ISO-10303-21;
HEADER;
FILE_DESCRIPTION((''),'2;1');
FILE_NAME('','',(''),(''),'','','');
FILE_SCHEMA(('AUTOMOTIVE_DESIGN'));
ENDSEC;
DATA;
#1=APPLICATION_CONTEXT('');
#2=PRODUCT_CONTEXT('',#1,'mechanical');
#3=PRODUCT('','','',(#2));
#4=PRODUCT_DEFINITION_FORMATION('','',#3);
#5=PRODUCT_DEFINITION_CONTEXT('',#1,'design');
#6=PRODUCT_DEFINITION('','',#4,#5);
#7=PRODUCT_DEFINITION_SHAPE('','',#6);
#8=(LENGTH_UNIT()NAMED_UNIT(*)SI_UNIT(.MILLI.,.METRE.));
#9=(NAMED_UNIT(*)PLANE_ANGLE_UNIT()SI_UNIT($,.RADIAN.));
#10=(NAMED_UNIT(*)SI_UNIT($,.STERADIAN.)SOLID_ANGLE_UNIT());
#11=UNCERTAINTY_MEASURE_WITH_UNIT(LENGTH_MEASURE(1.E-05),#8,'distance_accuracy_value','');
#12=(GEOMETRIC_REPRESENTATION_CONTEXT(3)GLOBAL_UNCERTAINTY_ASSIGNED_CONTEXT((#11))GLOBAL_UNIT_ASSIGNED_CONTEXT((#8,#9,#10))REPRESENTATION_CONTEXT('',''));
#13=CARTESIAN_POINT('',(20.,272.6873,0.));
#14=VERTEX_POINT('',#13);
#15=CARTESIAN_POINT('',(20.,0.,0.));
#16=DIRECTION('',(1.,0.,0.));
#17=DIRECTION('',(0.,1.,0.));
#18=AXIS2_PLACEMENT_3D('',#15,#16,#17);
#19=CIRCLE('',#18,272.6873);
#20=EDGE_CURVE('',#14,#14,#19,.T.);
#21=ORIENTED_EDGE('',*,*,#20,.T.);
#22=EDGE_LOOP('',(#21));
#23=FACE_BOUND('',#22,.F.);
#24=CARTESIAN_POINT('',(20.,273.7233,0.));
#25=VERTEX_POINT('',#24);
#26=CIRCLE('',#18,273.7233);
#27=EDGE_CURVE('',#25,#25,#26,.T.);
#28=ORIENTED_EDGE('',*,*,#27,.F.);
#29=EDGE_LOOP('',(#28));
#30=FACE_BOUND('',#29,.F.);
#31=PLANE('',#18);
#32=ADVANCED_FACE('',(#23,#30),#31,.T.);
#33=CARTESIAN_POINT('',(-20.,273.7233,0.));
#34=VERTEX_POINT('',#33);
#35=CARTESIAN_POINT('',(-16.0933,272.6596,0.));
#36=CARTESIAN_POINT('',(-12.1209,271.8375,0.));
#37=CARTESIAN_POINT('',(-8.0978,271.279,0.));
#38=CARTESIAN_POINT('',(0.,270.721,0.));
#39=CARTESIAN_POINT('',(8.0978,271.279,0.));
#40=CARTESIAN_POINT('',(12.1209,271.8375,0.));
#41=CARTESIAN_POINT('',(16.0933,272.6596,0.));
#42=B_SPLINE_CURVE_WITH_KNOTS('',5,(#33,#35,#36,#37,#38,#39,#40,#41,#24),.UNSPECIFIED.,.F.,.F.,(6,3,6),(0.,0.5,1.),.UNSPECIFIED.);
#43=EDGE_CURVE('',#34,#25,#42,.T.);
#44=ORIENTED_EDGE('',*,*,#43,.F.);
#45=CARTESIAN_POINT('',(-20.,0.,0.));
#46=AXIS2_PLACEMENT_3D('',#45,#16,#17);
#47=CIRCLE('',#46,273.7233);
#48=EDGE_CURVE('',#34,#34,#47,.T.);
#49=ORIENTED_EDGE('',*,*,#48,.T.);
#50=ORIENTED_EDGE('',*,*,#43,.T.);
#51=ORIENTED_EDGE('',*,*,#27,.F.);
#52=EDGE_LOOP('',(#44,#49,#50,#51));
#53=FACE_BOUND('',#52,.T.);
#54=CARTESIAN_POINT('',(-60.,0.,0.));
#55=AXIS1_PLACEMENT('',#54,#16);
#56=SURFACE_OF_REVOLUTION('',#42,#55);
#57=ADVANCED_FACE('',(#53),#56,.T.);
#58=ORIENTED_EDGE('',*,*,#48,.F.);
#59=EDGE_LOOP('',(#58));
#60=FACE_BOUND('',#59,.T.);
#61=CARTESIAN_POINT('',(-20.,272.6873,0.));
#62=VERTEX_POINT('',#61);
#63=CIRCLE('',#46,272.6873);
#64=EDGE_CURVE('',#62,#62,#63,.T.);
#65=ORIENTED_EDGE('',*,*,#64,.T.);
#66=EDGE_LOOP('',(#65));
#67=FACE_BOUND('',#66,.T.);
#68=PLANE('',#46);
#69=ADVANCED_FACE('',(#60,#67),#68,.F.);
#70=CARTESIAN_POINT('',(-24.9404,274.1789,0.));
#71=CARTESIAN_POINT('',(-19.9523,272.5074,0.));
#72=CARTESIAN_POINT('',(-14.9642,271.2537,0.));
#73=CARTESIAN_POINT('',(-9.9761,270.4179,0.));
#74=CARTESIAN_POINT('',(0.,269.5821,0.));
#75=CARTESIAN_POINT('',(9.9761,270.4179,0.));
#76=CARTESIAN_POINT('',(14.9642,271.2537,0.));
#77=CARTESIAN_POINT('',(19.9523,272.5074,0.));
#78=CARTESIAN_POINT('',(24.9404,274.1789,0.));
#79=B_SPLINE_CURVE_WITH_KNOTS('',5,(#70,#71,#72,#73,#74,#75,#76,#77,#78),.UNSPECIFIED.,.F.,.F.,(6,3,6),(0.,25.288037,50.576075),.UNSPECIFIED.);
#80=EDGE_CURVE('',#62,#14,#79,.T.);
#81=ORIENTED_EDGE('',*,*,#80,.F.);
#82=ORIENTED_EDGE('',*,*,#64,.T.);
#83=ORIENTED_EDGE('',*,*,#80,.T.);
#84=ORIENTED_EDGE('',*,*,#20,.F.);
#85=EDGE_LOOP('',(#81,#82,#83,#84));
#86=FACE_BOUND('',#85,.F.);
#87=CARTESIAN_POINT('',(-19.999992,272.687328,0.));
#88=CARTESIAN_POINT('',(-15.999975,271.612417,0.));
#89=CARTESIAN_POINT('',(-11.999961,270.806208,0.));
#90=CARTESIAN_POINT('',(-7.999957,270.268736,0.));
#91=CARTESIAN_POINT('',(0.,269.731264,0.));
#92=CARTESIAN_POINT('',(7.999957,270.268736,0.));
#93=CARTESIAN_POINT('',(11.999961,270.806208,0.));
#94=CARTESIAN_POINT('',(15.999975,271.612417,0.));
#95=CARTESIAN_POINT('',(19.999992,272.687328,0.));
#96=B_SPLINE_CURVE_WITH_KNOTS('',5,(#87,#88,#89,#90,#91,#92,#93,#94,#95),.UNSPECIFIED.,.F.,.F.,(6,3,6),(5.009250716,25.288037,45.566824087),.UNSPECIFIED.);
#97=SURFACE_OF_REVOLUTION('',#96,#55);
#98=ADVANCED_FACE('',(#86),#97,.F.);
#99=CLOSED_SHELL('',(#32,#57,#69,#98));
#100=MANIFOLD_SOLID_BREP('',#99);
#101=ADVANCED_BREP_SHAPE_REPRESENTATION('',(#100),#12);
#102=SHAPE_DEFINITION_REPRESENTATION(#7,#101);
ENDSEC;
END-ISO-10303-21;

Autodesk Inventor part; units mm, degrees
ref_plane "YZ Plane" through (0, 0, 0) normal (1, 0, 0) x (0, 1, 0)
ref_plane "XZ Plane" through (0, 0, 0) normal (0, 1, 0) x (-1, 0, 0)
ref_plane "XY Plane" through (0, 0, 0) normal (0, 0, 1) x (1, 0, 0)
sketch "Boceto2" plane through (0, 0, 0) normal (0, 0, 1) x (1, 0, 0)
  spline S0 degree 5 poles (-24.9404, 274.1789) (-19.9523, 272.5074) (-14.9642, 271.2537) (-9.9761, 270.4179) (0, 269.5821) (9.9761, 270.4179) (14.9642, 271.2537) (19.9523, 272.5074) (24.9404, 274.1789) knots 0 0 0 0 0 0 25.288037 25.288037 25.288037 50.576075 50.576075 50.576075 50.576075 50.576075 50.576075 projected
  line L0 (-20, 272.6873) -> (-20, 273.7233)
  line L1 (20, 272.6873) -> (20, 273.7233)
  line L2 (0, 271) -> (0, 0) construction
  line L3 (-60, 0) -> (55, 0)
  spline S1 degree 5 poles (-20, 273.7233) (-16.0933, 272.6596) (-12.1209, 271.8375) (-8.0978, 271.279) (0, 270.721) (8.0978, 271.279) (12.1209, 271.8375) (16.0933, 272.6596) (20, 273.7233) knots 0 0 0 0 0 0 0.5 0.5 0.5 1 1 1 1 1 1
  dimension "d0" = 1
  dimension "d1" = 20
  dimension "d2" = 20
revolve "Revolución1" add sketch "Boceto2" angle 360 about axis through (-60, 0, 0) along (1, 0, 0)
properties part number "cinta_protectora"
